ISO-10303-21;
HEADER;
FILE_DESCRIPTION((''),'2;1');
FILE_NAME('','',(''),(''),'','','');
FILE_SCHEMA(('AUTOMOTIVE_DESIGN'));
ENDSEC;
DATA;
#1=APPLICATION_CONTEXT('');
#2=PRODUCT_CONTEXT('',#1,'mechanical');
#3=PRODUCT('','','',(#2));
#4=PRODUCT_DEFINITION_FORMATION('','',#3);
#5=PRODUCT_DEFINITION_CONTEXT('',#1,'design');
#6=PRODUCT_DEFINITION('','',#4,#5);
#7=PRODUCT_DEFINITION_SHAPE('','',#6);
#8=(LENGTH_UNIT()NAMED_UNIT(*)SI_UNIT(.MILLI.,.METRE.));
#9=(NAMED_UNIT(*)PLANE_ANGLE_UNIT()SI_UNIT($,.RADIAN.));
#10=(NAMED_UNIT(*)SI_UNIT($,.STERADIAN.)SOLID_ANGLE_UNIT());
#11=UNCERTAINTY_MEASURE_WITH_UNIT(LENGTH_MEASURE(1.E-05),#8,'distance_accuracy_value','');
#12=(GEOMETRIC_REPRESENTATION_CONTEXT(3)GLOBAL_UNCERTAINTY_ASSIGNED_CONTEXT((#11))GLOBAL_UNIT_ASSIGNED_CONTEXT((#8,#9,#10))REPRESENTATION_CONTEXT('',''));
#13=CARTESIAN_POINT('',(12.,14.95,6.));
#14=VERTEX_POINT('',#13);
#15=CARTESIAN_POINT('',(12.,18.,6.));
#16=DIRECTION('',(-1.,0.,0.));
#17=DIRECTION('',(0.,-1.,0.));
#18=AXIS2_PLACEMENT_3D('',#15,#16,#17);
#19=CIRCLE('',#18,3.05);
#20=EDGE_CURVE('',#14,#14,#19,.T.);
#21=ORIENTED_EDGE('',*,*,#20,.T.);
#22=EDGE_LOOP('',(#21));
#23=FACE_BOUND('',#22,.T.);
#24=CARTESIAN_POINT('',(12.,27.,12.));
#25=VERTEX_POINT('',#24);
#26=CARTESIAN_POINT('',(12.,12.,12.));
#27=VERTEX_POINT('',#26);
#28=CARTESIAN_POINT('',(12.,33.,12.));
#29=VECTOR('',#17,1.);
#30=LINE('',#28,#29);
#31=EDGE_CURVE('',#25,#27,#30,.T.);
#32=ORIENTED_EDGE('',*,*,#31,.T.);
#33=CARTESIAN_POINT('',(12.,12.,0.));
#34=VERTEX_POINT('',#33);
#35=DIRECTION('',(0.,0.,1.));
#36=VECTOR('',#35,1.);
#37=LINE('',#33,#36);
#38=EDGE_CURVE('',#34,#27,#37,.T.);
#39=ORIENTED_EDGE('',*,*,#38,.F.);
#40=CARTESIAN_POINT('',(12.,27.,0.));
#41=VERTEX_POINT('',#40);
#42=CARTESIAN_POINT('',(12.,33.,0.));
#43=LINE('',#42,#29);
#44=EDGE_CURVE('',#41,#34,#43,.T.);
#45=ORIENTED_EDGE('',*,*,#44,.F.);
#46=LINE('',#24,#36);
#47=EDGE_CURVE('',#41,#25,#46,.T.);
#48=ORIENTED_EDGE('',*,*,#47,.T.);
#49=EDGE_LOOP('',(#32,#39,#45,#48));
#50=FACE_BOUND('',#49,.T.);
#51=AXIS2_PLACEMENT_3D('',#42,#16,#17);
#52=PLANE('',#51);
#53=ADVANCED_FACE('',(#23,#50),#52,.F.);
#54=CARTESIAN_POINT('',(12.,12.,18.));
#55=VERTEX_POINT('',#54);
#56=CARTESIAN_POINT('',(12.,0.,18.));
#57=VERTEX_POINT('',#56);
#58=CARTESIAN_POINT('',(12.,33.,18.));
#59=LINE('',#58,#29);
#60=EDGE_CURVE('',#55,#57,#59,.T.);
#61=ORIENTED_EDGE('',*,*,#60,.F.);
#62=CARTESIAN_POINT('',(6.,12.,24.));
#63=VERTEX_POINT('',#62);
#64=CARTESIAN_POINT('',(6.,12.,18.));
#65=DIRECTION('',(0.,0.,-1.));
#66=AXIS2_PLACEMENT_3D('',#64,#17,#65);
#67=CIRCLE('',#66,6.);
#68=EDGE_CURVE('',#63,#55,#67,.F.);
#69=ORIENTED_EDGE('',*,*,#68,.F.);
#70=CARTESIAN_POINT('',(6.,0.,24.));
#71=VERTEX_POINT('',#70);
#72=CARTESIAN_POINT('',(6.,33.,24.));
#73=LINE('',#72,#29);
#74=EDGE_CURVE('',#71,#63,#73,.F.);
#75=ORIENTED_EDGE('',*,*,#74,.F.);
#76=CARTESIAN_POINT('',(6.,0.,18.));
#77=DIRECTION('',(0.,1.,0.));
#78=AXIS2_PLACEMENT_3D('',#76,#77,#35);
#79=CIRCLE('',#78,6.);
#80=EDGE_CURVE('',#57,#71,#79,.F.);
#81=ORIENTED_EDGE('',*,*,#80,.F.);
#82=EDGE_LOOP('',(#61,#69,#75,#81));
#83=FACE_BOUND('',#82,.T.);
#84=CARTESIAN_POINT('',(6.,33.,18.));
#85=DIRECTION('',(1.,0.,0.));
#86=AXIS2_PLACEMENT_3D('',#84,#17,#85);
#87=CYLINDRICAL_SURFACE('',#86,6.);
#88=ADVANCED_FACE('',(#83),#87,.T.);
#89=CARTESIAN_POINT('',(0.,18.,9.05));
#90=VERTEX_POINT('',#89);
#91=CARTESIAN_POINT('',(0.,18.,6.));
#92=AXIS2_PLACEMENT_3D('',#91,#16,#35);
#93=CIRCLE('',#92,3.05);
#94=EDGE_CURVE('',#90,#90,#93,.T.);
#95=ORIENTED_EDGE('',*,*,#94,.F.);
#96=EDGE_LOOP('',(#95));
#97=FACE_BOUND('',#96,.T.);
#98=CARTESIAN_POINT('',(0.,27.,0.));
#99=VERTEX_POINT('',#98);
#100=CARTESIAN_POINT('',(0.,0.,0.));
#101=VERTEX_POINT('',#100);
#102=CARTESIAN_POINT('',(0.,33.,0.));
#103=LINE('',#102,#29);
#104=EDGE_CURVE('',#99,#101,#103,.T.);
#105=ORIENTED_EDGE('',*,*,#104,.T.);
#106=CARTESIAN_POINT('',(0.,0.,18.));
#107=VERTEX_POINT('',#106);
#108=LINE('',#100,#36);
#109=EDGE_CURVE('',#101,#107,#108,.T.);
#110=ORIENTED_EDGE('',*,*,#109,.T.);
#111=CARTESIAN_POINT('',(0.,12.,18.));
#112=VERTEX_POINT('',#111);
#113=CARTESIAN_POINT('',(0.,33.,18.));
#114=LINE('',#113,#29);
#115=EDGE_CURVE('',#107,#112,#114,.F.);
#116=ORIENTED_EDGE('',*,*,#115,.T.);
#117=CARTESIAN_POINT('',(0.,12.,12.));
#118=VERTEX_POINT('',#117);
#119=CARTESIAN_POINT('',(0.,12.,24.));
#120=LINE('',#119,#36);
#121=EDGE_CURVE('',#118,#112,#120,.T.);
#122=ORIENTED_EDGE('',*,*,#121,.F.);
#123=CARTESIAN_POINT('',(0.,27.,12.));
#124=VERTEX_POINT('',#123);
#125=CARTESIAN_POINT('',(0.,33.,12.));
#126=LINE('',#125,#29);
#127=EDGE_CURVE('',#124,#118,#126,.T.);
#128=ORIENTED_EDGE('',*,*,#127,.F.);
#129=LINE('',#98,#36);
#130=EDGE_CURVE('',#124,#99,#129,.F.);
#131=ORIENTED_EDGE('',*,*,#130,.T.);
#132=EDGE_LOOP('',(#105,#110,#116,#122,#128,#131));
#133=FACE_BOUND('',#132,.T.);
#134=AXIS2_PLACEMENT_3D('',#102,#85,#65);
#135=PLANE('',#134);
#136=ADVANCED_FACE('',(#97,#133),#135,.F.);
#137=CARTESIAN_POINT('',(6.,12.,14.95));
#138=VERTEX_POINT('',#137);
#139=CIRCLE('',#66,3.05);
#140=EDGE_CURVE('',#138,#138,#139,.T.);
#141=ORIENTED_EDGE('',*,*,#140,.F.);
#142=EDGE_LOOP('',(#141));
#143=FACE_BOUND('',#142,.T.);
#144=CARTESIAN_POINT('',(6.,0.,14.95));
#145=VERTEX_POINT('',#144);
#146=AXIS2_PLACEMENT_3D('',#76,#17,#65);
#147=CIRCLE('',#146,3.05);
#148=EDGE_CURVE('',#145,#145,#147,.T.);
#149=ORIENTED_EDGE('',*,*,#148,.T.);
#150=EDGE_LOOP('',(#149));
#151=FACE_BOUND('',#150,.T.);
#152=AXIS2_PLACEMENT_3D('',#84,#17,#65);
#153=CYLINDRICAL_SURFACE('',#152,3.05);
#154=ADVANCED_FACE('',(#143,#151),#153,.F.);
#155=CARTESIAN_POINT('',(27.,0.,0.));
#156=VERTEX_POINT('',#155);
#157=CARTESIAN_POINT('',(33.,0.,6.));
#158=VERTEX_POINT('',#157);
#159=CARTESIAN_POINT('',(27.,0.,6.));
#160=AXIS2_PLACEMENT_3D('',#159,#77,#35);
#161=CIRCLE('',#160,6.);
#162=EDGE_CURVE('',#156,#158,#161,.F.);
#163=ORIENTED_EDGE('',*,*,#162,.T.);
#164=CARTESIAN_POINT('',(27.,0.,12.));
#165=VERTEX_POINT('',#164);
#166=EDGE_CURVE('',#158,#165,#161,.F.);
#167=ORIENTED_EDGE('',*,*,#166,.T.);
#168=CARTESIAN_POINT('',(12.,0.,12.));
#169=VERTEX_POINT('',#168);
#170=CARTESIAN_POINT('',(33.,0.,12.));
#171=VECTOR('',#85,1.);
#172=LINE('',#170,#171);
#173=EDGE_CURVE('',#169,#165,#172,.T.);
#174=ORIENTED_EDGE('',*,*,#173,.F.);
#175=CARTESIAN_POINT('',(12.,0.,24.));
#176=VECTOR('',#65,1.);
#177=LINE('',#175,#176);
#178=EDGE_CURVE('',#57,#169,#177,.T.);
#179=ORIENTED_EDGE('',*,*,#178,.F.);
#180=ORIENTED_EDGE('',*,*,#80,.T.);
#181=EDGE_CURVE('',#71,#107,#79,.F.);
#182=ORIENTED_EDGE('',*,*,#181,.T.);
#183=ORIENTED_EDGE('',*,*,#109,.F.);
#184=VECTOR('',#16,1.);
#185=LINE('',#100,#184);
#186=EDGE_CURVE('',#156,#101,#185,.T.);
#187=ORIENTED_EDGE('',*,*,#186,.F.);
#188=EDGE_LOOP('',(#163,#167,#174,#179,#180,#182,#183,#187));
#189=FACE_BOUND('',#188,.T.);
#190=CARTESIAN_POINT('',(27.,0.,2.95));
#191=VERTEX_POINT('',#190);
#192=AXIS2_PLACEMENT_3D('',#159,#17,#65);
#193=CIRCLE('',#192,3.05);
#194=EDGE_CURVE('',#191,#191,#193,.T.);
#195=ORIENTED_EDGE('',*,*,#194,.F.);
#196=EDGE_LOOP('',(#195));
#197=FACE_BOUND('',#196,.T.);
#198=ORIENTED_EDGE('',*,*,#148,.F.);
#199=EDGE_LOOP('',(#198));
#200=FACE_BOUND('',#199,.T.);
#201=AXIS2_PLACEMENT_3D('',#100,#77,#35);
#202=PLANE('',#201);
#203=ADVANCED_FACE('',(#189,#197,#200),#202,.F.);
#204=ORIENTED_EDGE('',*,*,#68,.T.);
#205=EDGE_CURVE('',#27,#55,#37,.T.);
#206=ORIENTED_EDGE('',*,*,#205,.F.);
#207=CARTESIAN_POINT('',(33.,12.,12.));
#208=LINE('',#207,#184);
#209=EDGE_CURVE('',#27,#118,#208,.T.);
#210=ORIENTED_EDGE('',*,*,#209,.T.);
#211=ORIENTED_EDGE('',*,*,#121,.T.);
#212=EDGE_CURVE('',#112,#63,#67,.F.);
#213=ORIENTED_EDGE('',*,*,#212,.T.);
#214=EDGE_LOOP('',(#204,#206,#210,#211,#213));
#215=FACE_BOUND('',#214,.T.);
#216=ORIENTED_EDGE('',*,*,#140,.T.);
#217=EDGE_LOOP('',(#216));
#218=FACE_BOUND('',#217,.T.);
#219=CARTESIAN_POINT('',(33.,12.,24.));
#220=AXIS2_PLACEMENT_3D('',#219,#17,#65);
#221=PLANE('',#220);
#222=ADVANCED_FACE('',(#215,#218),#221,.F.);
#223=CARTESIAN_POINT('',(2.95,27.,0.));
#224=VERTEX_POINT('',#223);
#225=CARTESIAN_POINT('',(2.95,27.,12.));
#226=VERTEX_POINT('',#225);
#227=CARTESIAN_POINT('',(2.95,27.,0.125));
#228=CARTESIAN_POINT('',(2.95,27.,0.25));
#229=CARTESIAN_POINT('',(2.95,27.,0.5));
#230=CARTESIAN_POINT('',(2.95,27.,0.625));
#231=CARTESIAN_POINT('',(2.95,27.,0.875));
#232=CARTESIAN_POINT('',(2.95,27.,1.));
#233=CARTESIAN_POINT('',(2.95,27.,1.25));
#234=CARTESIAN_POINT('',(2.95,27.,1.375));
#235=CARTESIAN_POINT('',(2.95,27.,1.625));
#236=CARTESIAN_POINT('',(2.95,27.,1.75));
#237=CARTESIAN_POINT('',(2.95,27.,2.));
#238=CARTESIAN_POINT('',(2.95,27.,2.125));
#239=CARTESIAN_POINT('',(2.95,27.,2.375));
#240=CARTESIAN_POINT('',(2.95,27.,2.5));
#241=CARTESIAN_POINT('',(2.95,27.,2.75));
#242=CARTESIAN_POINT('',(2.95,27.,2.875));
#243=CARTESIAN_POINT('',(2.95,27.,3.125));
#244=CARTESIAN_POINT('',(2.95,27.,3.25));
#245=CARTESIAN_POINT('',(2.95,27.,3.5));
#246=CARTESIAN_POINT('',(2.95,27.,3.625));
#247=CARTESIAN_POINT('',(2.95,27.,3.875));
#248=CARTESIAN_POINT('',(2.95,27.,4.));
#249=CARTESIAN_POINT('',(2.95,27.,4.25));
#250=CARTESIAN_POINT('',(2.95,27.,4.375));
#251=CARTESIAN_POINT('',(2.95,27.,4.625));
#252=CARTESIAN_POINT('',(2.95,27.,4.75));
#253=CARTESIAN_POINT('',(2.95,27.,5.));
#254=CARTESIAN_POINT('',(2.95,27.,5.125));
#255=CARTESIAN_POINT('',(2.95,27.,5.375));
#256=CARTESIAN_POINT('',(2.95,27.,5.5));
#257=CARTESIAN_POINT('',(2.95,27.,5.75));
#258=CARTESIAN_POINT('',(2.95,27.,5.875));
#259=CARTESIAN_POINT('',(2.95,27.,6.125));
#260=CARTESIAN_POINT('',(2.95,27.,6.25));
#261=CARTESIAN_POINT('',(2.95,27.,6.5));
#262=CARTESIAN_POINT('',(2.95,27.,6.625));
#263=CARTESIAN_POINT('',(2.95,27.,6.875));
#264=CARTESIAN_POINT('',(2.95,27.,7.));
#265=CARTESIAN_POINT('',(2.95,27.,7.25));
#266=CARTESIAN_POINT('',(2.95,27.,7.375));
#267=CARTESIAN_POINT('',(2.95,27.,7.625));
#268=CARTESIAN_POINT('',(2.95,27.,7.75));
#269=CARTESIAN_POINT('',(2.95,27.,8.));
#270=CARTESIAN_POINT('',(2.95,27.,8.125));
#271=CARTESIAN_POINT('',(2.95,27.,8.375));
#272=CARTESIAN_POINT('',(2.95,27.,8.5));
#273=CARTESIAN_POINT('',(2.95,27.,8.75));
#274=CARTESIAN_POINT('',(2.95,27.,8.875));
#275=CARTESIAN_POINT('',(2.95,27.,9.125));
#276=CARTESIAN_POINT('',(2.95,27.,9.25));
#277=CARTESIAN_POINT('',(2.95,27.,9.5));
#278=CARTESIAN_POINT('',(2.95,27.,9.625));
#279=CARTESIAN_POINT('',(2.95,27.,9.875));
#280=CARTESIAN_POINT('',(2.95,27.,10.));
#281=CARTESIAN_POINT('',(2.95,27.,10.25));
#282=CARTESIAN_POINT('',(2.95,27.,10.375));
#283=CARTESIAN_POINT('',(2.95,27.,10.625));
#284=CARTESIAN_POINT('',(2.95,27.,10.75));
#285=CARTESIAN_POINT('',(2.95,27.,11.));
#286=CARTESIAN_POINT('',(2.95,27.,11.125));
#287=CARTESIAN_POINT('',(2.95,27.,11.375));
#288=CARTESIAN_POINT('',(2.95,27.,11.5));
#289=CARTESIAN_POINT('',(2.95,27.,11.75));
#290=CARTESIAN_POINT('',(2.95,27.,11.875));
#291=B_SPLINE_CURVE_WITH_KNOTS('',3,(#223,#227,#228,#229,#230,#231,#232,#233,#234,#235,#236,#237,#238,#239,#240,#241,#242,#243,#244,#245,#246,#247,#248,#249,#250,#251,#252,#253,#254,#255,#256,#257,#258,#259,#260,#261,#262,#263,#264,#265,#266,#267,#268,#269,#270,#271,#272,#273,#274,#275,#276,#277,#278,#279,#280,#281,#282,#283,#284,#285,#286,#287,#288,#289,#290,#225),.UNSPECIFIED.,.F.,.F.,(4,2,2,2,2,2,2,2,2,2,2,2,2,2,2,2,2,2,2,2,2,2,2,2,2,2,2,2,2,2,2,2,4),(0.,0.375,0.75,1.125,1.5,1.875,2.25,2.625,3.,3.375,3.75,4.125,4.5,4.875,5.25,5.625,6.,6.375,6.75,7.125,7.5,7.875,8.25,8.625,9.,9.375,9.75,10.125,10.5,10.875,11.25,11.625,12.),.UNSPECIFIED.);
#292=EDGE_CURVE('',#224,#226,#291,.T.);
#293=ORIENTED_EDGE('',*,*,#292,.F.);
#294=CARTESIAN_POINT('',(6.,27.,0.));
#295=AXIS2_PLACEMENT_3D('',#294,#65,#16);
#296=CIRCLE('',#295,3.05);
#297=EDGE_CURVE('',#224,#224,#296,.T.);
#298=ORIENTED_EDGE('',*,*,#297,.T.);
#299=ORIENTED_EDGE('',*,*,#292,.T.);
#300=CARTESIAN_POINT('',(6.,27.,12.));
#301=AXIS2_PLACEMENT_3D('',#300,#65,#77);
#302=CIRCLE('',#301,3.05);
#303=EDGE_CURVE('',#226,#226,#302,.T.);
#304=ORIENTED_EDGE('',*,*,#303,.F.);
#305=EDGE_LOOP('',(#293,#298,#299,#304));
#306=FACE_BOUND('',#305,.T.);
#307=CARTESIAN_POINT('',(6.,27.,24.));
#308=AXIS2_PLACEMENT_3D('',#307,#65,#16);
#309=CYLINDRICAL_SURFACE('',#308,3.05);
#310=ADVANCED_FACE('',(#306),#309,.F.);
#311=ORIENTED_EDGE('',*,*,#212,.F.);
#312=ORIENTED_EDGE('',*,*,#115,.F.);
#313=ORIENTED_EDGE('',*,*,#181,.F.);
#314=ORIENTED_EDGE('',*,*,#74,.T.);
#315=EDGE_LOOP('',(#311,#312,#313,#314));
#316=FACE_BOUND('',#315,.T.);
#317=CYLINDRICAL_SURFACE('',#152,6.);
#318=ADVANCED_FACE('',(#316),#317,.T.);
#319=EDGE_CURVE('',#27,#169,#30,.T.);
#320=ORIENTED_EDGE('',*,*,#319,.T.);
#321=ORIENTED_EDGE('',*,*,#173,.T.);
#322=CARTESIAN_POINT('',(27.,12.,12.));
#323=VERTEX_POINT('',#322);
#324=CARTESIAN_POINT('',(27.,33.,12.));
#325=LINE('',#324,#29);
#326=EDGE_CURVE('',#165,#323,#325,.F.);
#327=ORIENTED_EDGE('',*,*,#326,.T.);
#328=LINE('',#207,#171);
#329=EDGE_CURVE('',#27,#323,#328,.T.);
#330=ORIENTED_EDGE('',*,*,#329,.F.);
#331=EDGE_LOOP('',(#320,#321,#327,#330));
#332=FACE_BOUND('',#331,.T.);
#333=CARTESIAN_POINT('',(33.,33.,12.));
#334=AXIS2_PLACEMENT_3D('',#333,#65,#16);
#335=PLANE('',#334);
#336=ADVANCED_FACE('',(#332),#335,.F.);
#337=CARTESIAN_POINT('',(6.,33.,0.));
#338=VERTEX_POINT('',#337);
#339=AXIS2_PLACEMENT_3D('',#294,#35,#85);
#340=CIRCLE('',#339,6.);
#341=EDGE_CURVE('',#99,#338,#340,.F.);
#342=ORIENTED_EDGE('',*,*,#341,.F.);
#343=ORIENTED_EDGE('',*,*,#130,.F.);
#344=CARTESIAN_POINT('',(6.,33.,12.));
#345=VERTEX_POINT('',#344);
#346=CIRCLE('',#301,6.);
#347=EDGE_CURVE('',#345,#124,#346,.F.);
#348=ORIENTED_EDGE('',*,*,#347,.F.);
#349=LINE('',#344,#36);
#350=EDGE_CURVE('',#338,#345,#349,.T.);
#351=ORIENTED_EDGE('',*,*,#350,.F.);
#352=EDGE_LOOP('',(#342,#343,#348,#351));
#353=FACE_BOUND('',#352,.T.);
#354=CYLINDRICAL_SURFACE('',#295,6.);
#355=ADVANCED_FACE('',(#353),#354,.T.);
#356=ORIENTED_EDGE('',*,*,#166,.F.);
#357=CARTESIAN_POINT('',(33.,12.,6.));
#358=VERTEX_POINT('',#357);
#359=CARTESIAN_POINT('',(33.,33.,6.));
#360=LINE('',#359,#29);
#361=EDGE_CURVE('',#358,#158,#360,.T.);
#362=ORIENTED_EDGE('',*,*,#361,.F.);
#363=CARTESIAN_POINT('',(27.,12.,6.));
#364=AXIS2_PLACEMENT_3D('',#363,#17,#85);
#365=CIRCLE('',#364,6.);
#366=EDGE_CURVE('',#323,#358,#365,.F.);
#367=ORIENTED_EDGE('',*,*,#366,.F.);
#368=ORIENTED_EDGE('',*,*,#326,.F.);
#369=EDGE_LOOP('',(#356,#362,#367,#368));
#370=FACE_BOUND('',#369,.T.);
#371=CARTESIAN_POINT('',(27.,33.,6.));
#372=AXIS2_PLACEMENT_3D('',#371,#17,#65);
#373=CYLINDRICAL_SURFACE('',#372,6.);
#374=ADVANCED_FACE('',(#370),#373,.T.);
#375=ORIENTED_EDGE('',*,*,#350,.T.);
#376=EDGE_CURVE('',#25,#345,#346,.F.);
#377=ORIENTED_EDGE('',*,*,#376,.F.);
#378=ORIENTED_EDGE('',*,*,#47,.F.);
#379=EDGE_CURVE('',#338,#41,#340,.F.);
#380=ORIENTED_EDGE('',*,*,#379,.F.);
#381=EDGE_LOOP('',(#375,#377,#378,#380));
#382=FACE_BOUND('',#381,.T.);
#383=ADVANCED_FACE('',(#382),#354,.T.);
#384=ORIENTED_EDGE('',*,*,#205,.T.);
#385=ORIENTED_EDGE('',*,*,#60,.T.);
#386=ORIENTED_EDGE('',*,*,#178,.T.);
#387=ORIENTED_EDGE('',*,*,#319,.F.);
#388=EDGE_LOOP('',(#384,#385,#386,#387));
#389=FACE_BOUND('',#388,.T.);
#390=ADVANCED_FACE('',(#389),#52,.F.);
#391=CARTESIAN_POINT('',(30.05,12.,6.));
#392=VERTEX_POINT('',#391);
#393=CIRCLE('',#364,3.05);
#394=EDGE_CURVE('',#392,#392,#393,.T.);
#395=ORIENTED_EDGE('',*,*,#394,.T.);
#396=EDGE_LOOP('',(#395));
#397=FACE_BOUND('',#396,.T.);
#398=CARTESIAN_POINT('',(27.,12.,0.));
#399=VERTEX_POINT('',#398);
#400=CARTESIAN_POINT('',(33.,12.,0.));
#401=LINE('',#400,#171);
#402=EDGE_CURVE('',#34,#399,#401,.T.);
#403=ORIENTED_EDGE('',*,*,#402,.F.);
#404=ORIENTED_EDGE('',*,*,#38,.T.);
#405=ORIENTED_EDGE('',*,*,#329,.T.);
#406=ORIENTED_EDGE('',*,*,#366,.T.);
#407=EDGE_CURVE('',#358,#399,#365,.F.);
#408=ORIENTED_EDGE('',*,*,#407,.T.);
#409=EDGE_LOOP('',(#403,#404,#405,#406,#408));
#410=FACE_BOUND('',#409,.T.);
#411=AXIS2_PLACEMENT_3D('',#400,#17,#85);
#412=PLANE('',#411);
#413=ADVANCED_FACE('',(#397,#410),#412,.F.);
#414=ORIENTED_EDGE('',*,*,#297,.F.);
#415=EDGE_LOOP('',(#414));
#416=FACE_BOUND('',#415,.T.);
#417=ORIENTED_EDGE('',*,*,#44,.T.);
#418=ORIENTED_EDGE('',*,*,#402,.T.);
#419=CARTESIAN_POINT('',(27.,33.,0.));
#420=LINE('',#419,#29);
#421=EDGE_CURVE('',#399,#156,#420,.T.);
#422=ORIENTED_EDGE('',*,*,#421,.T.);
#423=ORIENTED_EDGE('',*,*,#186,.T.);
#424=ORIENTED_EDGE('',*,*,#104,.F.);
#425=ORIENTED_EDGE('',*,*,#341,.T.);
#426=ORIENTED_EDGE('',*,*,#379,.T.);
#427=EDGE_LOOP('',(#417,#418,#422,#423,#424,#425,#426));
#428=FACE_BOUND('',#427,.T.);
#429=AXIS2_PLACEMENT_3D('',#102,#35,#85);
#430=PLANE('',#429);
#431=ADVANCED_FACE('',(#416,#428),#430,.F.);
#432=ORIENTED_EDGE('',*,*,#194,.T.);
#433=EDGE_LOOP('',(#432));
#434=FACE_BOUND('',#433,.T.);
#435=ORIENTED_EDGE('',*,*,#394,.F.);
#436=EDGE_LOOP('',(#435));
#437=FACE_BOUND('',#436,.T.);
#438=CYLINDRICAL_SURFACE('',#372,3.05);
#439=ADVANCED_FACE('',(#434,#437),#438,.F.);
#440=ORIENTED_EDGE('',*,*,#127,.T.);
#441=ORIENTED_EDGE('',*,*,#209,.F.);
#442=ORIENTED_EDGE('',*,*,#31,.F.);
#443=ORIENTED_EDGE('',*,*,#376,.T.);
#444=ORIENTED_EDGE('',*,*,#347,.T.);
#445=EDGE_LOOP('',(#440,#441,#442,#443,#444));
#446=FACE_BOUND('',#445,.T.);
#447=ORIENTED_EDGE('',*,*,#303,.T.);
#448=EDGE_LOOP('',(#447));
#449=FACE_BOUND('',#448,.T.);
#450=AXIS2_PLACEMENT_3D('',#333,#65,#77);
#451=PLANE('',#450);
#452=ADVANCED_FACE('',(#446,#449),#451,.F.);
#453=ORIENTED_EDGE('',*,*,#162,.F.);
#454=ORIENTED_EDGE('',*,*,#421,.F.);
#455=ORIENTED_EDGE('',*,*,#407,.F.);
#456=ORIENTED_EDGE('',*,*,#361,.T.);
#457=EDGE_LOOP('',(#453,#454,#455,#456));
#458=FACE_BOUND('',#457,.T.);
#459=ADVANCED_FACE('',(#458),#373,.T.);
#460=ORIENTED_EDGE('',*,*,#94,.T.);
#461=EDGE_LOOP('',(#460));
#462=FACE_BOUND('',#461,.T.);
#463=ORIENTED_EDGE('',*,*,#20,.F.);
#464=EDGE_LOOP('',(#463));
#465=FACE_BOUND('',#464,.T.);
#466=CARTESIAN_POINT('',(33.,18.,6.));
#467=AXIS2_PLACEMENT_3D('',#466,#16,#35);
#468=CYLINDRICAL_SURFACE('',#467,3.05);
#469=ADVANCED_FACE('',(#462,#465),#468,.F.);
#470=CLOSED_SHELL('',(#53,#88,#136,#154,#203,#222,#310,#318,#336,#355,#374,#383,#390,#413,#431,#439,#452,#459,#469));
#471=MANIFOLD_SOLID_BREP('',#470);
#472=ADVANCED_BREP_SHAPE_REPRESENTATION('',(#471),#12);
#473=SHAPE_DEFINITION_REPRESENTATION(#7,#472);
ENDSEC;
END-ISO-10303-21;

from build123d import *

# Parameters (mm, degrees)
SKETCH1_W           = 33
SKETCH1_H           = 24
BOSS_EXTRUDE1_DEPTH = 33
SKETCH2_W           = 21
SKETCH2_H           = 21
CUT_EXTRUDE1_DEPTH  = 53.478567054
SKETCH3_W           = 21
SKETCH3_H           = 12
CUT_EXTRUDE2_DEPTH  = 53.478567054
SKETCH4_W           = 12
SKETCH4_H           = 21
CUT_EXTRUDE3_DEPTH  = 53.478567054
SKETCH5_R           = 3.05
CUT_EXTRUDE4_DEPTH  = 53.478567054
SKETCH6_R           = 3.05
CUT_EXTRUDE5_DEPTH  = 53.478567054
SKETCH7_R           = 3.05
CUT_EXTRUDE6_DEPTH  = 53.478567054
FILLET1_R           = 6


with BuildPart() as part:
    # Sketch1 → Boss-Extrude1 (new body)
    with BuildSketch(Plane(origin=(0, 0, 0), x_dir=(1, 0, 0), z_dir=(0, 1, 0))):
        with Locations((16.5, -12)):
            Rectangle(SKETCH1_W, SKETCH1_H)
    extrude(amount=BOSS_EXTRUDE1_DEPTH)

    # Sketch2 → Cut-Extrude1 (cut, through all)
    with BuildSketch(Plane.XY.offset(24)):
        with Locations((22.5, 22.5)):
            Rectangle(SKETCH2_W, SKETCH2_H)
    extrude(amount=-CUT_EXTRUDE1_DEPTH, mode=Mode.SUBTRACT)

    # Sketch3 → Cut-Extrude2 (cut, through all)
    with BuildSketch(Plane.XZ):
        with Locations((22.5, 18)):
            Rectangle(SKETCH3_W, SKETCH3_H)
    extrude(amount=-CUT_EXTRUDE2_DEPTH, mode=Mode.SUBTRACT)

    # Sketch4 → Cut-Extrude3 (cut, through all)
    with BuildSketch(Plane.ZY):
        with Locations((18, 22.5)):
            Rectangle(SKETCH4_W, SKETCH4_H)
    extrude(amount=-CUT_EXTRUDE3_DEPTH, mode=Mode.SUBTRACT)

    # Sketch5 → Cut-Extrude4 (cut, through all)
    with BuildSketch(Plane.ZY):
        with Locations((6, 18)):
            Circle(SKETCH5_R)
    extrude(amount=-CUT_EXTRUDE4_DEPTH, mode=Mode.SUBTRACT)

    # Sketch6 → Cut-Extrude5 (cut, through all)
    with BuildSketch(Plane.XZ):
        with Locations(Location((6, 18, 0), (0, 0, 270))):
            Circle(SKETCH6_R)
        with Locations(Location((27, 6, 0), (0, 0, 270))):
            Circle(SKETCH6_R)
    extrude(amount=-CUT_EXTRUDE5_DEPTH, mode=Mode.SUBTRACT)

    # Sketch7 → Cut-Extrude6 (cut, through all)
    with BuildSketch(Plane(origin=(0, 0, 0), x_dir=(-1, 0, 0), z_dir=(0, 0, -1))):
        with Locations((-6, 27)):
            Circle(SKETCH7_R)
    extrude(amount=-CUT_EXTRUDE6_DEPTH, mode=Mode.SUBTRACT)

    # Fillet1
    fillet1_edges = [part.edges().sort_by_distance(p)[0] for p in [
        (12, 33, 6),
        (0, 33, 6),
        (33, 6, 0),
        (33, 6, 12),
        (0, 6, 24),
        (12, 6, 24),
    ]]
    fillet(fillet1_edges, radius=FILLET1_R - 0.0001)  # a hair under: the kernel refuses the full size


solid = part.part
